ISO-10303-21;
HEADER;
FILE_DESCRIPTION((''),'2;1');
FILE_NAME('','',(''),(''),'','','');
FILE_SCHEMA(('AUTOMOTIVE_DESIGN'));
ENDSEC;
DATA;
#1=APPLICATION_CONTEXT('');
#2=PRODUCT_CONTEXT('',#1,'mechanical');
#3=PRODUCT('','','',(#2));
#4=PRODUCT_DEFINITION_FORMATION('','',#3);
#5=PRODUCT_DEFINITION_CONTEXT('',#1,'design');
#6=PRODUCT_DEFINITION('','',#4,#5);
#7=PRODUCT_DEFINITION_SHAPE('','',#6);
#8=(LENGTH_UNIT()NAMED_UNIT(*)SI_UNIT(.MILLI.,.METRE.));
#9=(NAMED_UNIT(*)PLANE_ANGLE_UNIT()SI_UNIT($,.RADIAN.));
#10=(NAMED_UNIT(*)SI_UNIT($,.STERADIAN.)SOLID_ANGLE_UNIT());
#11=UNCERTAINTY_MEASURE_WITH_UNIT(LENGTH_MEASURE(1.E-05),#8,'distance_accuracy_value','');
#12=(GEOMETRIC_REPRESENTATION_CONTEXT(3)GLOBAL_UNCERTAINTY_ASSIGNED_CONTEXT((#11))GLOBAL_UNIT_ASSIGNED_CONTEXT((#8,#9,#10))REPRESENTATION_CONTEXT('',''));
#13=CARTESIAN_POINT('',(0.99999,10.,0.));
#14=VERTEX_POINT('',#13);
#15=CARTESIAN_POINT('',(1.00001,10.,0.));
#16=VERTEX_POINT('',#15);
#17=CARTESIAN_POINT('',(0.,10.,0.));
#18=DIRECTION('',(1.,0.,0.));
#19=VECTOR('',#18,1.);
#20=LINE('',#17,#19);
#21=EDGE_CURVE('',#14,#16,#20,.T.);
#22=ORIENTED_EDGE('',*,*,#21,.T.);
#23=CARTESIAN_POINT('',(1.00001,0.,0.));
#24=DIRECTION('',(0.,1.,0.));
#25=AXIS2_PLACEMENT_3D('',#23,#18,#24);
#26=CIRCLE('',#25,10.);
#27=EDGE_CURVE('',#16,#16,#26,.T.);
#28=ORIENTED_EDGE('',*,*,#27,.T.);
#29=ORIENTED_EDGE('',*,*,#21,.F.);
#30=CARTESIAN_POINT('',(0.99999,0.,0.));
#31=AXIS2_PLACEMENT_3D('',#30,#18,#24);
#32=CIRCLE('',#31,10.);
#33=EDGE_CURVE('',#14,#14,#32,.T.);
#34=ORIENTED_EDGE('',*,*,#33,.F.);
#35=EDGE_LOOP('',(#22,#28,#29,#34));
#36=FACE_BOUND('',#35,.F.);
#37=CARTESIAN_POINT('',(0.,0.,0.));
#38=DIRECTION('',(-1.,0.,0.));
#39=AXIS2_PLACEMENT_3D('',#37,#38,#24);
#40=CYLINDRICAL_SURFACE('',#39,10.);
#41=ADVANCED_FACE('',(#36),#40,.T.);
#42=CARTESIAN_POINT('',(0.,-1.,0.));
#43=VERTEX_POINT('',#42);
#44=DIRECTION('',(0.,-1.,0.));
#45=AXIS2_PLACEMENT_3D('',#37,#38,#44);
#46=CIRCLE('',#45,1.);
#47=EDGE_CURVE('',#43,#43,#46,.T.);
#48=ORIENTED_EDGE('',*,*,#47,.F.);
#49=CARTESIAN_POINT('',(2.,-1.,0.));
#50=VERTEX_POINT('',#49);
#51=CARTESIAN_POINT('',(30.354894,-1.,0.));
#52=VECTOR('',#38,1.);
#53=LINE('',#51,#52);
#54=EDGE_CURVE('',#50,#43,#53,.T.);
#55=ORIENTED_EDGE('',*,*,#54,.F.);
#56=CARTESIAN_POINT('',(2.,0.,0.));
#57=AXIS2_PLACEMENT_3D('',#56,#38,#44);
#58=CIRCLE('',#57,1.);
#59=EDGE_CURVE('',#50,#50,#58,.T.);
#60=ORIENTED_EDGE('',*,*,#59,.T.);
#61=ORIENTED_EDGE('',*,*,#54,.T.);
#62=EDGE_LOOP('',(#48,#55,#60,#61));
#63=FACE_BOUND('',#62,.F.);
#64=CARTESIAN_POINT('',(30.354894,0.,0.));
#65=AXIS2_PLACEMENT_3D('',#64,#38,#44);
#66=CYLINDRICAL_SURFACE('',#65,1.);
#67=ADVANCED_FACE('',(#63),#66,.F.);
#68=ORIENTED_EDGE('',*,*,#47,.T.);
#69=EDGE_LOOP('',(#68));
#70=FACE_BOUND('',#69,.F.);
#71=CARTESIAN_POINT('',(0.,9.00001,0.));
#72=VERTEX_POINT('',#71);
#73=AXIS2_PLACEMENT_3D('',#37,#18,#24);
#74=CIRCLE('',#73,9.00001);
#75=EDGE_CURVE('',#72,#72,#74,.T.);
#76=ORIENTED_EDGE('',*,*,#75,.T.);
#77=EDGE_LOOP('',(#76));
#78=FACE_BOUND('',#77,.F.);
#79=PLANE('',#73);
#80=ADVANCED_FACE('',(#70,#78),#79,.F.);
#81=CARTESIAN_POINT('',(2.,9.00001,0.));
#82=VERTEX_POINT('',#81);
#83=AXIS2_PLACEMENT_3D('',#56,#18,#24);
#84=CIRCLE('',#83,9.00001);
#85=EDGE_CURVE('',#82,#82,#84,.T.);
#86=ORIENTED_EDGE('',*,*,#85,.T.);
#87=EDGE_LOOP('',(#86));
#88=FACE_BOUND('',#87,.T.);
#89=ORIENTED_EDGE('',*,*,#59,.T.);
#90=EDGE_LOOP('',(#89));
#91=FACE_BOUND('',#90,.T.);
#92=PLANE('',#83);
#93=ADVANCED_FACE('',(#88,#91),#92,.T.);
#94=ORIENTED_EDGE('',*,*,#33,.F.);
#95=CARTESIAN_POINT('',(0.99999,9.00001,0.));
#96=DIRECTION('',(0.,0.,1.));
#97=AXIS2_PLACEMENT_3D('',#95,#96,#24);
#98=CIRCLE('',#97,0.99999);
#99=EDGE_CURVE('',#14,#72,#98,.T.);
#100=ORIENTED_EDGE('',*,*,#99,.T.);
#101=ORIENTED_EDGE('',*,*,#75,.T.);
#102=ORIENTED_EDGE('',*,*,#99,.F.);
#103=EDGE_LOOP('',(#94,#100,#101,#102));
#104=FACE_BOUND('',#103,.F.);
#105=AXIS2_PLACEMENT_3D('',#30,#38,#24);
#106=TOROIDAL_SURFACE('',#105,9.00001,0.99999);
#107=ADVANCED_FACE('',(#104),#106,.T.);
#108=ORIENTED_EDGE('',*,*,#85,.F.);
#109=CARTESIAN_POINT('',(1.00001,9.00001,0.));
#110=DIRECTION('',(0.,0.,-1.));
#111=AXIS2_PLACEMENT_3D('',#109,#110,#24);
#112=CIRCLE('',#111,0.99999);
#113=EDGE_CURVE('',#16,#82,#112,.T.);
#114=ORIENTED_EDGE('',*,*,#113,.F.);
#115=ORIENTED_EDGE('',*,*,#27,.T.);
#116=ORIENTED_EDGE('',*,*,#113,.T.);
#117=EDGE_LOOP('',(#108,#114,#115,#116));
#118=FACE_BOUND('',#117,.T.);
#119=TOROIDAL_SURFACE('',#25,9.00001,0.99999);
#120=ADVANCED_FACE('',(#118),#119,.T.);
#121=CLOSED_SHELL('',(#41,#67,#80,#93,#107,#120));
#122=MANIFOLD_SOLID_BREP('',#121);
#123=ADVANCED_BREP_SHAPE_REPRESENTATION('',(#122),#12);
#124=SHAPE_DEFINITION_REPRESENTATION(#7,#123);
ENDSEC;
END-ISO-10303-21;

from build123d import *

# Parameters (mm, degrees)
F0_R     = 10
F1_DEPTH = 2
F2_R     = 0.99999
F4_D     = 2


# Not quite as in the source:
# - a fillet or chamfer is up to 0.001 mm smaller than in the source, because OpenCascade refuses the exact size


with BuildPart() as f1:
    # F0 (on Right) → F1 (new body)
    with BuildSketch(Plane.YZ):
        Circle(F0_R)
    extrude(amount=F1_DEPTH)

    # F2 (radius 1 in the source; OpenCascade refuses exactly that, so slightly less here)
    f2_edges = [f1.edges().sort_by_distance(p)[0] for p in [
        (1, 10, 0),
        (0, -10, 0),
        (2, -10, 0),
    ]]
    fillet(f2_edges, radius=F2_R)

    # F4 (through all)
    with Locations(Plane.YZ.offset(2)):
        with Locations((0, 0)):
            Hole(F4_D / 2)


solid = f1.part
